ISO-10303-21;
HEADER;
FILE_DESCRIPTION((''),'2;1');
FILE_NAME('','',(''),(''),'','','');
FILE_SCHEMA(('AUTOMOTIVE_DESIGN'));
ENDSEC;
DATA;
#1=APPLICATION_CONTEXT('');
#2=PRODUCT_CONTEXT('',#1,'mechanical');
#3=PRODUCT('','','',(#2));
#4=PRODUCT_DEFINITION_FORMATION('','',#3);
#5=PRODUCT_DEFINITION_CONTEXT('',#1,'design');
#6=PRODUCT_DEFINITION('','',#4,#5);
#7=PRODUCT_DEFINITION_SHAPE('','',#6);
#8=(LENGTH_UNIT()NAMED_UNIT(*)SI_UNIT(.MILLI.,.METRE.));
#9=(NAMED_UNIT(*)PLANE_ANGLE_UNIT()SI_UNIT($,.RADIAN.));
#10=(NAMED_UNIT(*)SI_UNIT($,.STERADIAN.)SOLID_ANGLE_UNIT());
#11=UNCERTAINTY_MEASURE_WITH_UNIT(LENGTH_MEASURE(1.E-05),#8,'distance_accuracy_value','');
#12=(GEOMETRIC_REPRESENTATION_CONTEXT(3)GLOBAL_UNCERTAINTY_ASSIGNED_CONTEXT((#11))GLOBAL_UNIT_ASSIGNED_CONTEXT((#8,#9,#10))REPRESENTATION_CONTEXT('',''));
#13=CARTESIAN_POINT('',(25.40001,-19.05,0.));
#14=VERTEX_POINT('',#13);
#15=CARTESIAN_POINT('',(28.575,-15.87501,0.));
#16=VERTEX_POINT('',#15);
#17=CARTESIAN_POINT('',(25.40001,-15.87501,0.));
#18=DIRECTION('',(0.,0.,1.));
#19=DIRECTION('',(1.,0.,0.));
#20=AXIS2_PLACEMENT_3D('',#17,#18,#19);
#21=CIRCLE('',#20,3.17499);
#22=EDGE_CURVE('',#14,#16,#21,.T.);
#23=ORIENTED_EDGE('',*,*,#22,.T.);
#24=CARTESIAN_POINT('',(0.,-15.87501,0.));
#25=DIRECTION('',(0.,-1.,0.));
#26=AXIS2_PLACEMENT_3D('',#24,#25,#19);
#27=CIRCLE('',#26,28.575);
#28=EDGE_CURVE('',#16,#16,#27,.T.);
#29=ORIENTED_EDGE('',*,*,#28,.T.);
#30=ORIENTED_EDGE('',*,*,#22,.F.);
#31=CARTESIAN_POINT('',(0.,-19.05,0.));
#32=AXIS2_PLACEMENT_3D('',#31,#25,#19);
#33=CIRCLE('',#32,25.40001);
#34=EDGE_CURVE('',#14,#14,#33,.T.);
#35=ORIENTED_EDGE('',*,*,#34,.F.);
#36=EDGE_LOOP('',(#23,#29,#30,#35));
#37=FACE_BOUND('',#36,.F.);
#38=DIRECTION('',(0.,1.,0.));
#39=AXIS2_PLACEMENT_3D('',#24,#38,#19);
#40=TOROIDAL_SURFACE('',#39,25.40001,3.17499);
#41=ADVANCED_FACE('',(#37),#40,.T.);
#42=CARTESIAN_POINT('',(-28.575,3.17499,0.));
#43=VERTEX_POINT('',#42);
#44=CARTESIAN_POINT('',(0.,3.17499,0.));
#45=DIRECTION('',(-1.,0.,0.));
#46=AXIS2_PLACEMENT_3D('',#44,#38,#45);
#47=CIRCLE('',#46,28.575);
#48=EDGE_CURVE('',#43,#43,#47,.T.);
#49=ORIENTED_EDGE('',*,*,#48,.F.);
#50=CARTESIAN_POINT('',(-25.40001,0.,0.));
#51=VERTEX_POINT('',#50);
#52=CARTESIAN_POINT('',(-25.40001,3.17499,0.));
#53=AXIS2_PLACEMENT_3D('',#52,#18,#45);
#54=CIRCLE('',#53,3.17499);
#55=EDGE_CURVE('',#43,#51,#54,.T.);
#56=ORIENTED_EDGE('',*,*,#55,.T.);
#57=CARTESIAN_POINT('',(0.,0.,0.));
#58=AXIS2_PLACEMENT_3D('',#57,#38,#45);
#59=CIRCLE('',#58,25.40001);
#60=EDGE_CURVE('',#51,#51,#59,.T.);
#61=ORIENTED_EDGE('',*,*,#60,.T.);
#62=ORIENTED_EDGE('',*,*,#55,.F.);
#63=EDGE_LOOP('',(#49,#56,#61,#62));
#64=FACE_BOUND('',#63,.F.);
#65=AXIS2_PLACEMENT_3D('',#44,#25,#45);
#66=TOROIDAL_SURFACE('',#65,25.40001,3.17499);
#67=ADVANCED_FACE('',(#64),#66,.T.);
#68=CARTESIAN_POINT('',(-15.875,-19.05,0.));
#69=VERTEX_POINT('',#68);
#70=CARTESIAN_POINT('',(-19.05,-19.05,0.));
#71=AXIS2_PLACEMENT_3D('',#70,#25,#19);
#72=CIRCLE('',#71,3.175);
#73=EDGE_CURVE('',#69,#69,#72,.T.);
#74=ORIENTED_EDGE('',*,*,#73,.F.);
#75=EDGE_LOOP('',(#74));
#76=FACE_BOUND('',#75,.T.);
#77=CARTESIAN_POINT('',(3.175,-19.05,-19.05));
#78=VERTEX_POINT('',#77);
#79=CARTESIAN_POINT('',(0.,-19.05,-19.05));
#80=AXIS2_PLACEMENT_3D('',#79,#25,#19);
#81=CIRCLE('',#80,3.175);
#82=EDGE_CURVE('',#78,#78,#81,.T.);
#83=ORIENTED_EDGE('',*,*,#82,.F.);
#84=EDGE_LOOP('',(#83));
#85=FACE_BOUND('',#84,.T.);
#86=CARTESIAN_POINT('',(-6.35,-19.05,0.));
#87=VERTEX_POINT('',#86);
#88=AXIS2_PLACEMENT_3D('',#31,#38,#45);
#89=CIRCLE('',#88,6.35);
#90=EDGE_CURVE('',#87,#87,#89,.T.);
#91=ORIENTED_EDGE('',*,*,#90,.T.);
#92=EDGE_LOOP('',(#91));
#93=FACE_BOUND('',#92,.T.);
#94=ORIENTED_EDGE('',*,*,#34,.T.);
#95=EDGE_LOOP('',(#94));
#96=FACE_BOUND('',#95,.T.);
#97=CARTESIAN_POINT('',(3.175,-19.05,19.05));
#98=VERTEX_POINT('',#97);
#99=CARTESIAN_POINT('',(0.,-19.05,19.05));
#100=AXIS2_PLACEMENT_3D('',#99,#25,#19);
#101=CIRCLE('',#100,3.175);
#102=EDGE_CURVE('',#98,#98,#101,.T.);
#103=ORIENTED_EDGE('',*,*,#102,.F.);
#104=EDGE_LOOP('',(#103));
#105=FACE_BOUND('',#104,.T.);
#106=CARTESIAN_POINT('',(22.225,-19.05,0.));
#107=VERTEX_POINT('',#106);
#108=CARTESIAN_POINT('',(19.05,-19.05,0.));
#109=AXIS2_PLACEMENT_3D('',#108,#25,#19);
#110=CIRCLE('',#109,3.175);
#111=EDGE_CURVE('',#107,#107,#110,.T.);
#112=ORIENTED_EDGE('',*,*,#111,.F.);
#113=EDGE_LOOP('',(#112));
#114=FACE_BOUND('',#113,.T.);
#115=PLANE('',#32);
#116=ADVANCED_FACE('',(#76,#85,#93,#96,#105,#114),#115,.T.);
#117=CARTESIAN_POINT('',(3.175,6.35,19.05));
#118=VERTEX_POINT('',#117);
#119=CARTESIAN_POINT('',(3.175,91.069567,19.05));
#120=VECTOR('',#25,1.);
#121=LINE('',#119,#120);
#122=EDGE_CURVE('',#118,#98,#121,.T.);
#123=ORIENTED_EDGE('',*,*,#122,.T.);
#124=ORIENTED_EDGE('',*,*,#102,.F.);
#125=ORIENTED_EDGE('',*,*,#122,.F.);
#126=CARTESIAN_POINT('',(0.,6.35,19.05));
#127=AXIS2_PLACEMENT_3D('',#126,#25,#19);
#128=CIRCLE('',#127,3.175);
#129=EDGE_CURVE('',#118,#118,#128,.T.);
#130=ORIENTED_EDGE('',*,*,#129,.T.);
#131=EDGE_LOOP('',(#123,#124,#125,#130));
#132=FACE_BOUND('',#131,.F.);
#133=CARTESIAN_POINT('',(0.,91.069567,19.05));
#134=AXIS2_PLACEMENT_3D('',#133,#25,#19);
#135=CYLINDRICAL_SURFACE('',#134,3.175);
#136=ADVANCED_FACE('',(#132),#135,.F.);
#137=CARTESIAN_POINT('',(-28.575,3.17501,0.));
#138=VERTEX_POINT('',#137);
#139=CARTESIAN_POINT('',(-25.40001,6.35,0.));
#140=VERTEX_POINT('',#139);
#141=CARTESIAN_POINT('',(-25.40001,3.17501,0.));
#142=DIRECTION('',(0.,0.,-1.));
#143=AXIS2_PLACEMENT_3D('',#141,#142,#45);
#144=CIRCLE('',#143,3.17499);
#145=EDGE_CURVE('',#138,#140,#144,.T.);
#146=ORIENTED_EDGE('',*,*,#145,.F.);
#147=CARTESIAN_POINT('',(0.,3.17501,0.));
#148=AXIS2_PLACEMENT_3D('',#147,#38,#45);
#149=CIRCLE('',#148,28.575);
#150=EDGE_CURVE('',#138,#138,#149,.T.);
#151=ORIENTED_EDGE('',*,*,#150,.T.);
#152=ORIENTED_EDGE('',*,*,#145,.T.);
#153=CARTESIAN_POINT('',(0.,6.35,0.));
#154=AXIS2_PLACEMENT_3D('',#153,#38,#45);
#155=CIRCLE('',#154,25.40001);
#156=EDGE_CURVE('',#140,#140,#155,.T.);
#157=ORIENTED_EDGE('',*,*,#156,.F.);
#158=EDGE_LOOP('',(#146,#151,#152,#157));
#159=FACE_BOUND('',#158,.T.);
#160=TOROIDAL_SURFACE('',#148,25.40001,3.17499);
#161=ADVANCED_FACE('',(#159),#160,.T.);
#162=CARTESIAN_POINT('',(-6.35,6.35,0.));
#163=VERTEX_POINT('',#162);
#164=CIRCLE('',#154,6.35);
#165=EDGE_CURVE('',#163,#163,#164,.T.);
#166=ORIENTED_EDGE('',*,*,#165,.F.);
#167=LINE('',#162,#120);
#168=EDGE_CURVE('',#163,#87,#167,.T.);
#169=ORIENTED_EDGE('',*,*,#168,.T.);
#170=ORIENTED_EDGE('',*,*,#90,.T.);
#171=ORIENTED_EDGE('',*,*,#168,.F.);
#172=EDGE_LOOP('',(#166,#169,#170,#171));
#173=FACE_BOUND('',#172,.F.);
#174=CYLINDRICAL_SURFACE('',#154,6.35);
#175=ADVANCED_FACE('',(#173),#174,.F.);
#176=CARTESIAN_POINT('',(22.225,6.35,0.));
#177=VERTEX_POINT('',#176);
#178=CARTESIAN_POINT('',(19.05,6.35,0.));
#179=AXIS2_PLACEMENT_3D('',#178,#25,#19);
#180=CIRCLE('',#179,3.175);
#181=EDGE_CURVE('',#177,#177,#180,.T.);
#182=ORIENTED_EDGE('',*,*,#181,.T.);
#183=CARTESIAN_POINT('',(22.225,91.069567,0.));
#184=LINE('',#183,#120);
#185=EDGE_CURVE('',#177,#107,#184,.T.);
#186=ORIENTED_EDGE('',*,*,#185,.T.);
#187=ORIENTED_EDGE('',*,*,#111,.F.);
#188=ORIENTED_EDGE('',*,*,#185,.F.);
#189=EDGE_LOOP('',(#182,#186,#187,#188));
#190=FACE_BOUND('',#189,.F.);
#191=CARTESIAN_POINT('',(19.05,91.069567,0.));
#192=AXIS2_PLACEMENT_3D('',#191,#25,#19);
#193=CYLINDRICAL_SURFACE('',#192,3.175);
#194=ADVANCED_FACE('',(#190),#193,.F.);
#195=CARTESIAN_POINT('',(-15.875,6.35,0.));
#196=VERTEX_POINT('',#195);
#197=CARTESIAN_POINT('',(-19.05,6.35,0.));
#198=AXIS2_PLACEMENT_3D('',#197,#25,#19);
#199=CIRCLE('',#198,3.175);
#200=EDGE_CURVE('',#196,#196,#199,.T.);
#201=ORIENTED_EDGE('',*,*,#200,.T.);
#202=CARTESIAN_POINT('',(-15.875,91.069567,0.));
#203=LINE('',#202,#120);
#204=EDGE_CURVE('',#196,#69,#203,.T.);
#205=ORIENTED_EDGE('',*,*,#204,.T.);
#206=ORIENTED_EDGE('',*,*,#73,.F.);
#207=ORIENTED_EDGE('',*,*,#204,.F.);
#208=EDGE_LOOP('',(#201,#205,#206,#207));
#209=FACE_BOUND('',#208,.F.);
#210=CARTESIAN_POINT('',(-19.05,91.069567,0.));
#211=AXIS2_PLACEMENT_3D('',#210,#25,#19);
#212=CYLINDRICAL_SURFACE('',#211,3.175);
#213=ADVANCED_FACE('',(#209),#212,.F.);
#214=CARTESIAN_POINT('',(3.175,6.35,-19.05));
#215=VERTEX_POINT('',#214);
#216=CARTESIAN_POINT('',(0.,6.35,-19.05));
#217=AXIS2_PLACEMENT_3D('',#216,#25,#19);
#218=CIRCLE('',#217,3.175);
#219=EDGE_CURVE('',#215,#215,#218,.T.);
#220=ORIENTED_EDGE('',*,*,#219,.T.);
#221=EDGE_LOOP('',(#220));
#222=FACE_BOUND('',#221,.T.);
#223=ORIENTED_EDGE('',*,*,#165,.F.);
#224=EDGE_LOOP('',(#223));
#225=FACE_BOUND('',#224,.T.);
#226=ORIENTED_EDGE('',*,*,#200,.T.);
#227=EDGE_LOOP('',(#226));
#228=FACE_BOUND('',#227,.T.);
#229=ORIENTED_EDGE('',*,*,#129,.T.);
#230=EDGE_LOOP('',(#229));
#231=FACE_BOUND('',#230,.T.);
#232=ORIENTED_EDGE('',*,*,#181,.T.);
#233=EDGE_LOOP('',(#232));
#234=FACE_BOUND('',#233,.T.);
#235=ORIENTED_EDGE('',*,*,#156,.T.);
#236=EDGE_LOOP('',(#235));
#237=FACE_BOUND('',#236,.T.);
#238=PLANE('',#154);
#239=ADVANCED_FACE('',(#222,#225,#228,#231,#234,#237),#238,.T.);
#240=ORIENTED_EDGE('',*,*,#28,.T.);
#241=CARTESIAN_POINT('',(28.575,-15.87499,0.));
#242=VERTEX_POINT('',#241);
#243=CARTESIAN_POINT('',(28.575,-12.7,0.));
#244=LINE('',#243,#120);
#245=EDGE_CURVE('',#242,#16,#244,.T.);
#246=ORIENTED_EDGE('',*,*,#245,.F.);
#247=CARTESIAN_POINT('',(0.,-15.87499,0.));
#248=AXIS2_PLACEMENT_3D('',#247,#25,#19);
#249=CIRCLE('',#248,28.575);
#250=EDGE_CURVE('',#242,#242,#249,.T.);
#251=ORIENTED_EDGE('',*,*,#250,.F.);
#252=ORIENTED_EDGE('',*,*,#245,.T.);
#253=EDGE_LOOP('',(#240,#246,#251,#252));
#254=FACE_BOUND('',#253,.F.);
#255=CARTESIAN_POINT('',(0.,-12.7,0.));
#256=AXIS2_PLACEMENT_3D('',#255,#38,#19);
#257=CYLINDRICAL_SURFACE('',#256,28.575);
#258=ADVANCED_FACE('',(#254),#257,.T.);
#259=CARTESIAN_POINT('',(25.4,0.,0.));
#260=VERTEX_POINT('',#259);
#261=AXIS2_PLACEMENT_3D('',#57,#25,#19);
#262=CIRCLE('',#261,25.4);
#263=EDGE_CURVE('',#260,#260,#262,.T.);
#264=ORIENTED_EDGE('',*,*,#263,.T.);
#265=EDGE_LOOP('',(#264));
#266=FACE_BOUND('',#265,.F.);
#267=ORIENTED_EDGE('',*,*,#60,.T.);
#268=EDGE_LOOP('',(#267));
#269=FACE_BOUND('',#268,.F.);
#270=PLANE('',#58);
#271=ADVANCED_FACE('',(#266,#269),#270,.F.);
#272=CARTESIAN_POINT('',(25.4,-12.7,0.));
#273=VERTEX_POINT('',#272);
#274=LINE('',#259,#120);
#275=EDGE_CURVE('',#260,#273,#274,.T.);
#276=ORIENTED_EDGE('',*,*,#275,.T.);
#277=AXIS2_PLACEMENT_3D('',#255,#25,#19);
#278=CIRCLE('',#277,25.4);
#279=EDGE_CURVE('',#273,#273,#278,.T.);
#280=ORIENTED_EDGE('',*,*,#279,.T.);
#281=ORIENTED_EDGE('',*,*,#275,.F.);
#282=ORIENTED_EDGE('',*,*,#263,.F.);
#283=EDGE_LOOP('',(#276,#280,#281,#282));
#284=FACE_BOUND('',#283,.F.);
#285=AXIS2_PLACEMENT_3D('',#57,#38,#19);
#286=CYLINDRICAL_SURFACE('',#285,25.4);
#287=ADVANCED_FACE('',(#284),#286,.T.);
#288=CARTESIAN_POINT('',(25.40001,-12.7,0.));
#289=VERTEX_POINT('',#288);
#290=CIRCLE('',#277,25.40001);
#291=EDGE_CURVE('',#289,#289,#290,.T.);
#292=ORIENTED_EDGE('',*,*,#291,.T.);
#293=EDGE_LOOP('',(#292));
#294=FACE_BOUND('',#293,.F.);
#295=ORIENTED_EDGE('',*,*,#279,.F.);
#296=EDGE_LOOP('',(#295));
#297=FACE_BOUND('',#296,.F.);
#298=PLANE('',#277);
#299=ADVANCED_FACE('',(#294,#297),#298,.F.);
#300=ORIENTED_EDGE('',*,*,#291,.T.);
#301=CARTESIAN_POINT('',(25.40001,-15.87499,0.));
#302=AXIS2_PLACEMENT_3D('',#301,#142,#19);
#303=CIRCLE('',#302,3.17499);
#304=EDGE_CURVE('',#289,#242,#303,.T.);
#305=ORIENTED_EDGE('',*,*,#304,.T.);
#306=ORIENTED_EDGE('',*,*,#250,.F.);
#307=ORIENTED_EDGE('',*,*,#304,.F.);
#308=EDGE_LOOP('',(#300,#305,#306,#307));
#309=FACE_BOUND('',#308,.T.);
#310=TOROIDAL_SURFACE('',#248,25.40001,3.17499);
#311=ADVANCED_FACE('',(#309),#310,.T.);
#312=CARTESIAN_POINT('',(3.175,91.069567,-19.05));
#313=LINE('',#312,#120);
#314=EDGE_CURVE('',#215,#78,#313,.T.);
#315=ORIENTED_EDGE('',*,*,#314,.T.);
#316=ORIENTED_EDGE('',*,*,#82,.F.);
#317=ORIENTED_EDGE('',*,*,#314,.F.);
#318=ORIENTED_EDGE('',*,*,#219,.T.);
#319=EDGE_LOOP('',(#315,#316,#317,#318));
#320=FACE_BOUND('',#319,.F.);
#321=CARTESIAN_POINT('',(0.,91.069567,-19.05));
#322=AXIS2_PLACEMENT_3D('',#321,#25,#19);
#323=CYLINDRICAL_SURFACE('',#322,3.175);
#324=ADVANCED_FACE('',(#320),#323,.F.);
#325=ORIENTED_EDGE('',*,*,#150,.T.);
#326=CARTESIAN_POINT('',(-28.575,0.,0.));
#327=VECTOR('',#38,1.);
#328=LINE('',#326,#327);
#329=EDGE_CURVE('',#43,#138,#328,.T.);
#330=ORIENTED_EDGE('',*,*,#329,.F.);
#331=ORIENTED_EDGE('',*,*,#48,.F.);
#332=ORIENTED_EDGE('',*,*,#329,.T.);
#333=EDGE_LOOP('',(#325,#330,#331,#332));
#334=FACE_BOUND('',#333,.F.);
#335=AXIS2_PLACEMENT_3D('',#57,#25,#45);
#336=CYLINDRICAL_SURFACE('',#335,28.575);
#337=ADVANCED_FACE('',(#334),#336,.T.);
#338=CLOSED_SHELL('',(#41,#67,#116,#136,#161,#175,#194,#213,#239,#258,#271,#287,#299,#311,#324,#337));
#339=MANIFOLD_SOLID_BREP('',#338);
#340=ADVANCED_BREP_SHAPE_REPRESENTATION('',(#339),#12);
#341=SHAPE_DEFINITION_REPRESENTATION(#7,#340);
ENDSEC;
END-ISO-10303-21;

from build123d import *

# Parameters (mm, degrees)
F0_R     = 25.4
F1_DEPTH = 12.7
F2_R     = 28.575
F3_DEPTH = 6.35
F4_R     = 28.575
F5_DEPTH = 6.35
F6_R     = 6.35
F7_DEPTH = 25.401
F9_D     = 6.35
F10_R    = 3.17499


# Not quite as in the source:
# - a fillet or chamfer is up to 0.001 mm smaller than in the source, because OpenCascade refuses the exact size


with BuildPart() as f1:
    # F0 (on Front) → F1 (new body)
    with BuildSketch(Plane.XZ):
        Circle(F0_R)
    extrude(amount=F1_DEPTH)

    # F2 (on face) → F3 (join)
    with BuildSketch(Plane.XZ.offset(12.7)):
        Circle(F2_R)
    extrude(amount=F3_DEPTH)

    # F4 (on face) → F5 (join)
    with BuildSketch(Plane(origin=(0, 0, 0), x_dir=(-1, 0, 0), z_dir=(0, 1, 0))):
        Circle(F4_R)
    extrude(amount=F5_DEPTH)

    # F6 (on face) → F7 (cut, through all)
    with BuildSketch(Plane(origin=(0, 6.35, 0), x_dir=(-1, 0, 0), z_dir=(0, 1, 0))):
        Circle(F6_R)
    extrude(amount=-F7_DEPTH, mode=Mode.SUBTRACT)

    # F9 (through all)
    with Locations(Plane(origin=(0, 6.35, 0), x_dir=(-1, 0, 0), z_dir=(0, 1, 0))):
        with Locations((0, 19.05), (19.05, 0), (0, -19.05), (-19.05, 0)):
            Hole(F9_D / 2)

    # F10 (radius 3.175 in the source; OpenCascade refuses exactly that, so slightly less here)
    f10_edges = [f1.edges().sort_by_distance(p)[0] for p in [
        (28.575, 6.35, 0),
        (28.575, 0, 0),
        (-28.575, -12.7, 0),
        (-28.575, -19.05, 0),
    ]]
    fillet(f10_edges, radius=F10_R)


solid = f1.part
